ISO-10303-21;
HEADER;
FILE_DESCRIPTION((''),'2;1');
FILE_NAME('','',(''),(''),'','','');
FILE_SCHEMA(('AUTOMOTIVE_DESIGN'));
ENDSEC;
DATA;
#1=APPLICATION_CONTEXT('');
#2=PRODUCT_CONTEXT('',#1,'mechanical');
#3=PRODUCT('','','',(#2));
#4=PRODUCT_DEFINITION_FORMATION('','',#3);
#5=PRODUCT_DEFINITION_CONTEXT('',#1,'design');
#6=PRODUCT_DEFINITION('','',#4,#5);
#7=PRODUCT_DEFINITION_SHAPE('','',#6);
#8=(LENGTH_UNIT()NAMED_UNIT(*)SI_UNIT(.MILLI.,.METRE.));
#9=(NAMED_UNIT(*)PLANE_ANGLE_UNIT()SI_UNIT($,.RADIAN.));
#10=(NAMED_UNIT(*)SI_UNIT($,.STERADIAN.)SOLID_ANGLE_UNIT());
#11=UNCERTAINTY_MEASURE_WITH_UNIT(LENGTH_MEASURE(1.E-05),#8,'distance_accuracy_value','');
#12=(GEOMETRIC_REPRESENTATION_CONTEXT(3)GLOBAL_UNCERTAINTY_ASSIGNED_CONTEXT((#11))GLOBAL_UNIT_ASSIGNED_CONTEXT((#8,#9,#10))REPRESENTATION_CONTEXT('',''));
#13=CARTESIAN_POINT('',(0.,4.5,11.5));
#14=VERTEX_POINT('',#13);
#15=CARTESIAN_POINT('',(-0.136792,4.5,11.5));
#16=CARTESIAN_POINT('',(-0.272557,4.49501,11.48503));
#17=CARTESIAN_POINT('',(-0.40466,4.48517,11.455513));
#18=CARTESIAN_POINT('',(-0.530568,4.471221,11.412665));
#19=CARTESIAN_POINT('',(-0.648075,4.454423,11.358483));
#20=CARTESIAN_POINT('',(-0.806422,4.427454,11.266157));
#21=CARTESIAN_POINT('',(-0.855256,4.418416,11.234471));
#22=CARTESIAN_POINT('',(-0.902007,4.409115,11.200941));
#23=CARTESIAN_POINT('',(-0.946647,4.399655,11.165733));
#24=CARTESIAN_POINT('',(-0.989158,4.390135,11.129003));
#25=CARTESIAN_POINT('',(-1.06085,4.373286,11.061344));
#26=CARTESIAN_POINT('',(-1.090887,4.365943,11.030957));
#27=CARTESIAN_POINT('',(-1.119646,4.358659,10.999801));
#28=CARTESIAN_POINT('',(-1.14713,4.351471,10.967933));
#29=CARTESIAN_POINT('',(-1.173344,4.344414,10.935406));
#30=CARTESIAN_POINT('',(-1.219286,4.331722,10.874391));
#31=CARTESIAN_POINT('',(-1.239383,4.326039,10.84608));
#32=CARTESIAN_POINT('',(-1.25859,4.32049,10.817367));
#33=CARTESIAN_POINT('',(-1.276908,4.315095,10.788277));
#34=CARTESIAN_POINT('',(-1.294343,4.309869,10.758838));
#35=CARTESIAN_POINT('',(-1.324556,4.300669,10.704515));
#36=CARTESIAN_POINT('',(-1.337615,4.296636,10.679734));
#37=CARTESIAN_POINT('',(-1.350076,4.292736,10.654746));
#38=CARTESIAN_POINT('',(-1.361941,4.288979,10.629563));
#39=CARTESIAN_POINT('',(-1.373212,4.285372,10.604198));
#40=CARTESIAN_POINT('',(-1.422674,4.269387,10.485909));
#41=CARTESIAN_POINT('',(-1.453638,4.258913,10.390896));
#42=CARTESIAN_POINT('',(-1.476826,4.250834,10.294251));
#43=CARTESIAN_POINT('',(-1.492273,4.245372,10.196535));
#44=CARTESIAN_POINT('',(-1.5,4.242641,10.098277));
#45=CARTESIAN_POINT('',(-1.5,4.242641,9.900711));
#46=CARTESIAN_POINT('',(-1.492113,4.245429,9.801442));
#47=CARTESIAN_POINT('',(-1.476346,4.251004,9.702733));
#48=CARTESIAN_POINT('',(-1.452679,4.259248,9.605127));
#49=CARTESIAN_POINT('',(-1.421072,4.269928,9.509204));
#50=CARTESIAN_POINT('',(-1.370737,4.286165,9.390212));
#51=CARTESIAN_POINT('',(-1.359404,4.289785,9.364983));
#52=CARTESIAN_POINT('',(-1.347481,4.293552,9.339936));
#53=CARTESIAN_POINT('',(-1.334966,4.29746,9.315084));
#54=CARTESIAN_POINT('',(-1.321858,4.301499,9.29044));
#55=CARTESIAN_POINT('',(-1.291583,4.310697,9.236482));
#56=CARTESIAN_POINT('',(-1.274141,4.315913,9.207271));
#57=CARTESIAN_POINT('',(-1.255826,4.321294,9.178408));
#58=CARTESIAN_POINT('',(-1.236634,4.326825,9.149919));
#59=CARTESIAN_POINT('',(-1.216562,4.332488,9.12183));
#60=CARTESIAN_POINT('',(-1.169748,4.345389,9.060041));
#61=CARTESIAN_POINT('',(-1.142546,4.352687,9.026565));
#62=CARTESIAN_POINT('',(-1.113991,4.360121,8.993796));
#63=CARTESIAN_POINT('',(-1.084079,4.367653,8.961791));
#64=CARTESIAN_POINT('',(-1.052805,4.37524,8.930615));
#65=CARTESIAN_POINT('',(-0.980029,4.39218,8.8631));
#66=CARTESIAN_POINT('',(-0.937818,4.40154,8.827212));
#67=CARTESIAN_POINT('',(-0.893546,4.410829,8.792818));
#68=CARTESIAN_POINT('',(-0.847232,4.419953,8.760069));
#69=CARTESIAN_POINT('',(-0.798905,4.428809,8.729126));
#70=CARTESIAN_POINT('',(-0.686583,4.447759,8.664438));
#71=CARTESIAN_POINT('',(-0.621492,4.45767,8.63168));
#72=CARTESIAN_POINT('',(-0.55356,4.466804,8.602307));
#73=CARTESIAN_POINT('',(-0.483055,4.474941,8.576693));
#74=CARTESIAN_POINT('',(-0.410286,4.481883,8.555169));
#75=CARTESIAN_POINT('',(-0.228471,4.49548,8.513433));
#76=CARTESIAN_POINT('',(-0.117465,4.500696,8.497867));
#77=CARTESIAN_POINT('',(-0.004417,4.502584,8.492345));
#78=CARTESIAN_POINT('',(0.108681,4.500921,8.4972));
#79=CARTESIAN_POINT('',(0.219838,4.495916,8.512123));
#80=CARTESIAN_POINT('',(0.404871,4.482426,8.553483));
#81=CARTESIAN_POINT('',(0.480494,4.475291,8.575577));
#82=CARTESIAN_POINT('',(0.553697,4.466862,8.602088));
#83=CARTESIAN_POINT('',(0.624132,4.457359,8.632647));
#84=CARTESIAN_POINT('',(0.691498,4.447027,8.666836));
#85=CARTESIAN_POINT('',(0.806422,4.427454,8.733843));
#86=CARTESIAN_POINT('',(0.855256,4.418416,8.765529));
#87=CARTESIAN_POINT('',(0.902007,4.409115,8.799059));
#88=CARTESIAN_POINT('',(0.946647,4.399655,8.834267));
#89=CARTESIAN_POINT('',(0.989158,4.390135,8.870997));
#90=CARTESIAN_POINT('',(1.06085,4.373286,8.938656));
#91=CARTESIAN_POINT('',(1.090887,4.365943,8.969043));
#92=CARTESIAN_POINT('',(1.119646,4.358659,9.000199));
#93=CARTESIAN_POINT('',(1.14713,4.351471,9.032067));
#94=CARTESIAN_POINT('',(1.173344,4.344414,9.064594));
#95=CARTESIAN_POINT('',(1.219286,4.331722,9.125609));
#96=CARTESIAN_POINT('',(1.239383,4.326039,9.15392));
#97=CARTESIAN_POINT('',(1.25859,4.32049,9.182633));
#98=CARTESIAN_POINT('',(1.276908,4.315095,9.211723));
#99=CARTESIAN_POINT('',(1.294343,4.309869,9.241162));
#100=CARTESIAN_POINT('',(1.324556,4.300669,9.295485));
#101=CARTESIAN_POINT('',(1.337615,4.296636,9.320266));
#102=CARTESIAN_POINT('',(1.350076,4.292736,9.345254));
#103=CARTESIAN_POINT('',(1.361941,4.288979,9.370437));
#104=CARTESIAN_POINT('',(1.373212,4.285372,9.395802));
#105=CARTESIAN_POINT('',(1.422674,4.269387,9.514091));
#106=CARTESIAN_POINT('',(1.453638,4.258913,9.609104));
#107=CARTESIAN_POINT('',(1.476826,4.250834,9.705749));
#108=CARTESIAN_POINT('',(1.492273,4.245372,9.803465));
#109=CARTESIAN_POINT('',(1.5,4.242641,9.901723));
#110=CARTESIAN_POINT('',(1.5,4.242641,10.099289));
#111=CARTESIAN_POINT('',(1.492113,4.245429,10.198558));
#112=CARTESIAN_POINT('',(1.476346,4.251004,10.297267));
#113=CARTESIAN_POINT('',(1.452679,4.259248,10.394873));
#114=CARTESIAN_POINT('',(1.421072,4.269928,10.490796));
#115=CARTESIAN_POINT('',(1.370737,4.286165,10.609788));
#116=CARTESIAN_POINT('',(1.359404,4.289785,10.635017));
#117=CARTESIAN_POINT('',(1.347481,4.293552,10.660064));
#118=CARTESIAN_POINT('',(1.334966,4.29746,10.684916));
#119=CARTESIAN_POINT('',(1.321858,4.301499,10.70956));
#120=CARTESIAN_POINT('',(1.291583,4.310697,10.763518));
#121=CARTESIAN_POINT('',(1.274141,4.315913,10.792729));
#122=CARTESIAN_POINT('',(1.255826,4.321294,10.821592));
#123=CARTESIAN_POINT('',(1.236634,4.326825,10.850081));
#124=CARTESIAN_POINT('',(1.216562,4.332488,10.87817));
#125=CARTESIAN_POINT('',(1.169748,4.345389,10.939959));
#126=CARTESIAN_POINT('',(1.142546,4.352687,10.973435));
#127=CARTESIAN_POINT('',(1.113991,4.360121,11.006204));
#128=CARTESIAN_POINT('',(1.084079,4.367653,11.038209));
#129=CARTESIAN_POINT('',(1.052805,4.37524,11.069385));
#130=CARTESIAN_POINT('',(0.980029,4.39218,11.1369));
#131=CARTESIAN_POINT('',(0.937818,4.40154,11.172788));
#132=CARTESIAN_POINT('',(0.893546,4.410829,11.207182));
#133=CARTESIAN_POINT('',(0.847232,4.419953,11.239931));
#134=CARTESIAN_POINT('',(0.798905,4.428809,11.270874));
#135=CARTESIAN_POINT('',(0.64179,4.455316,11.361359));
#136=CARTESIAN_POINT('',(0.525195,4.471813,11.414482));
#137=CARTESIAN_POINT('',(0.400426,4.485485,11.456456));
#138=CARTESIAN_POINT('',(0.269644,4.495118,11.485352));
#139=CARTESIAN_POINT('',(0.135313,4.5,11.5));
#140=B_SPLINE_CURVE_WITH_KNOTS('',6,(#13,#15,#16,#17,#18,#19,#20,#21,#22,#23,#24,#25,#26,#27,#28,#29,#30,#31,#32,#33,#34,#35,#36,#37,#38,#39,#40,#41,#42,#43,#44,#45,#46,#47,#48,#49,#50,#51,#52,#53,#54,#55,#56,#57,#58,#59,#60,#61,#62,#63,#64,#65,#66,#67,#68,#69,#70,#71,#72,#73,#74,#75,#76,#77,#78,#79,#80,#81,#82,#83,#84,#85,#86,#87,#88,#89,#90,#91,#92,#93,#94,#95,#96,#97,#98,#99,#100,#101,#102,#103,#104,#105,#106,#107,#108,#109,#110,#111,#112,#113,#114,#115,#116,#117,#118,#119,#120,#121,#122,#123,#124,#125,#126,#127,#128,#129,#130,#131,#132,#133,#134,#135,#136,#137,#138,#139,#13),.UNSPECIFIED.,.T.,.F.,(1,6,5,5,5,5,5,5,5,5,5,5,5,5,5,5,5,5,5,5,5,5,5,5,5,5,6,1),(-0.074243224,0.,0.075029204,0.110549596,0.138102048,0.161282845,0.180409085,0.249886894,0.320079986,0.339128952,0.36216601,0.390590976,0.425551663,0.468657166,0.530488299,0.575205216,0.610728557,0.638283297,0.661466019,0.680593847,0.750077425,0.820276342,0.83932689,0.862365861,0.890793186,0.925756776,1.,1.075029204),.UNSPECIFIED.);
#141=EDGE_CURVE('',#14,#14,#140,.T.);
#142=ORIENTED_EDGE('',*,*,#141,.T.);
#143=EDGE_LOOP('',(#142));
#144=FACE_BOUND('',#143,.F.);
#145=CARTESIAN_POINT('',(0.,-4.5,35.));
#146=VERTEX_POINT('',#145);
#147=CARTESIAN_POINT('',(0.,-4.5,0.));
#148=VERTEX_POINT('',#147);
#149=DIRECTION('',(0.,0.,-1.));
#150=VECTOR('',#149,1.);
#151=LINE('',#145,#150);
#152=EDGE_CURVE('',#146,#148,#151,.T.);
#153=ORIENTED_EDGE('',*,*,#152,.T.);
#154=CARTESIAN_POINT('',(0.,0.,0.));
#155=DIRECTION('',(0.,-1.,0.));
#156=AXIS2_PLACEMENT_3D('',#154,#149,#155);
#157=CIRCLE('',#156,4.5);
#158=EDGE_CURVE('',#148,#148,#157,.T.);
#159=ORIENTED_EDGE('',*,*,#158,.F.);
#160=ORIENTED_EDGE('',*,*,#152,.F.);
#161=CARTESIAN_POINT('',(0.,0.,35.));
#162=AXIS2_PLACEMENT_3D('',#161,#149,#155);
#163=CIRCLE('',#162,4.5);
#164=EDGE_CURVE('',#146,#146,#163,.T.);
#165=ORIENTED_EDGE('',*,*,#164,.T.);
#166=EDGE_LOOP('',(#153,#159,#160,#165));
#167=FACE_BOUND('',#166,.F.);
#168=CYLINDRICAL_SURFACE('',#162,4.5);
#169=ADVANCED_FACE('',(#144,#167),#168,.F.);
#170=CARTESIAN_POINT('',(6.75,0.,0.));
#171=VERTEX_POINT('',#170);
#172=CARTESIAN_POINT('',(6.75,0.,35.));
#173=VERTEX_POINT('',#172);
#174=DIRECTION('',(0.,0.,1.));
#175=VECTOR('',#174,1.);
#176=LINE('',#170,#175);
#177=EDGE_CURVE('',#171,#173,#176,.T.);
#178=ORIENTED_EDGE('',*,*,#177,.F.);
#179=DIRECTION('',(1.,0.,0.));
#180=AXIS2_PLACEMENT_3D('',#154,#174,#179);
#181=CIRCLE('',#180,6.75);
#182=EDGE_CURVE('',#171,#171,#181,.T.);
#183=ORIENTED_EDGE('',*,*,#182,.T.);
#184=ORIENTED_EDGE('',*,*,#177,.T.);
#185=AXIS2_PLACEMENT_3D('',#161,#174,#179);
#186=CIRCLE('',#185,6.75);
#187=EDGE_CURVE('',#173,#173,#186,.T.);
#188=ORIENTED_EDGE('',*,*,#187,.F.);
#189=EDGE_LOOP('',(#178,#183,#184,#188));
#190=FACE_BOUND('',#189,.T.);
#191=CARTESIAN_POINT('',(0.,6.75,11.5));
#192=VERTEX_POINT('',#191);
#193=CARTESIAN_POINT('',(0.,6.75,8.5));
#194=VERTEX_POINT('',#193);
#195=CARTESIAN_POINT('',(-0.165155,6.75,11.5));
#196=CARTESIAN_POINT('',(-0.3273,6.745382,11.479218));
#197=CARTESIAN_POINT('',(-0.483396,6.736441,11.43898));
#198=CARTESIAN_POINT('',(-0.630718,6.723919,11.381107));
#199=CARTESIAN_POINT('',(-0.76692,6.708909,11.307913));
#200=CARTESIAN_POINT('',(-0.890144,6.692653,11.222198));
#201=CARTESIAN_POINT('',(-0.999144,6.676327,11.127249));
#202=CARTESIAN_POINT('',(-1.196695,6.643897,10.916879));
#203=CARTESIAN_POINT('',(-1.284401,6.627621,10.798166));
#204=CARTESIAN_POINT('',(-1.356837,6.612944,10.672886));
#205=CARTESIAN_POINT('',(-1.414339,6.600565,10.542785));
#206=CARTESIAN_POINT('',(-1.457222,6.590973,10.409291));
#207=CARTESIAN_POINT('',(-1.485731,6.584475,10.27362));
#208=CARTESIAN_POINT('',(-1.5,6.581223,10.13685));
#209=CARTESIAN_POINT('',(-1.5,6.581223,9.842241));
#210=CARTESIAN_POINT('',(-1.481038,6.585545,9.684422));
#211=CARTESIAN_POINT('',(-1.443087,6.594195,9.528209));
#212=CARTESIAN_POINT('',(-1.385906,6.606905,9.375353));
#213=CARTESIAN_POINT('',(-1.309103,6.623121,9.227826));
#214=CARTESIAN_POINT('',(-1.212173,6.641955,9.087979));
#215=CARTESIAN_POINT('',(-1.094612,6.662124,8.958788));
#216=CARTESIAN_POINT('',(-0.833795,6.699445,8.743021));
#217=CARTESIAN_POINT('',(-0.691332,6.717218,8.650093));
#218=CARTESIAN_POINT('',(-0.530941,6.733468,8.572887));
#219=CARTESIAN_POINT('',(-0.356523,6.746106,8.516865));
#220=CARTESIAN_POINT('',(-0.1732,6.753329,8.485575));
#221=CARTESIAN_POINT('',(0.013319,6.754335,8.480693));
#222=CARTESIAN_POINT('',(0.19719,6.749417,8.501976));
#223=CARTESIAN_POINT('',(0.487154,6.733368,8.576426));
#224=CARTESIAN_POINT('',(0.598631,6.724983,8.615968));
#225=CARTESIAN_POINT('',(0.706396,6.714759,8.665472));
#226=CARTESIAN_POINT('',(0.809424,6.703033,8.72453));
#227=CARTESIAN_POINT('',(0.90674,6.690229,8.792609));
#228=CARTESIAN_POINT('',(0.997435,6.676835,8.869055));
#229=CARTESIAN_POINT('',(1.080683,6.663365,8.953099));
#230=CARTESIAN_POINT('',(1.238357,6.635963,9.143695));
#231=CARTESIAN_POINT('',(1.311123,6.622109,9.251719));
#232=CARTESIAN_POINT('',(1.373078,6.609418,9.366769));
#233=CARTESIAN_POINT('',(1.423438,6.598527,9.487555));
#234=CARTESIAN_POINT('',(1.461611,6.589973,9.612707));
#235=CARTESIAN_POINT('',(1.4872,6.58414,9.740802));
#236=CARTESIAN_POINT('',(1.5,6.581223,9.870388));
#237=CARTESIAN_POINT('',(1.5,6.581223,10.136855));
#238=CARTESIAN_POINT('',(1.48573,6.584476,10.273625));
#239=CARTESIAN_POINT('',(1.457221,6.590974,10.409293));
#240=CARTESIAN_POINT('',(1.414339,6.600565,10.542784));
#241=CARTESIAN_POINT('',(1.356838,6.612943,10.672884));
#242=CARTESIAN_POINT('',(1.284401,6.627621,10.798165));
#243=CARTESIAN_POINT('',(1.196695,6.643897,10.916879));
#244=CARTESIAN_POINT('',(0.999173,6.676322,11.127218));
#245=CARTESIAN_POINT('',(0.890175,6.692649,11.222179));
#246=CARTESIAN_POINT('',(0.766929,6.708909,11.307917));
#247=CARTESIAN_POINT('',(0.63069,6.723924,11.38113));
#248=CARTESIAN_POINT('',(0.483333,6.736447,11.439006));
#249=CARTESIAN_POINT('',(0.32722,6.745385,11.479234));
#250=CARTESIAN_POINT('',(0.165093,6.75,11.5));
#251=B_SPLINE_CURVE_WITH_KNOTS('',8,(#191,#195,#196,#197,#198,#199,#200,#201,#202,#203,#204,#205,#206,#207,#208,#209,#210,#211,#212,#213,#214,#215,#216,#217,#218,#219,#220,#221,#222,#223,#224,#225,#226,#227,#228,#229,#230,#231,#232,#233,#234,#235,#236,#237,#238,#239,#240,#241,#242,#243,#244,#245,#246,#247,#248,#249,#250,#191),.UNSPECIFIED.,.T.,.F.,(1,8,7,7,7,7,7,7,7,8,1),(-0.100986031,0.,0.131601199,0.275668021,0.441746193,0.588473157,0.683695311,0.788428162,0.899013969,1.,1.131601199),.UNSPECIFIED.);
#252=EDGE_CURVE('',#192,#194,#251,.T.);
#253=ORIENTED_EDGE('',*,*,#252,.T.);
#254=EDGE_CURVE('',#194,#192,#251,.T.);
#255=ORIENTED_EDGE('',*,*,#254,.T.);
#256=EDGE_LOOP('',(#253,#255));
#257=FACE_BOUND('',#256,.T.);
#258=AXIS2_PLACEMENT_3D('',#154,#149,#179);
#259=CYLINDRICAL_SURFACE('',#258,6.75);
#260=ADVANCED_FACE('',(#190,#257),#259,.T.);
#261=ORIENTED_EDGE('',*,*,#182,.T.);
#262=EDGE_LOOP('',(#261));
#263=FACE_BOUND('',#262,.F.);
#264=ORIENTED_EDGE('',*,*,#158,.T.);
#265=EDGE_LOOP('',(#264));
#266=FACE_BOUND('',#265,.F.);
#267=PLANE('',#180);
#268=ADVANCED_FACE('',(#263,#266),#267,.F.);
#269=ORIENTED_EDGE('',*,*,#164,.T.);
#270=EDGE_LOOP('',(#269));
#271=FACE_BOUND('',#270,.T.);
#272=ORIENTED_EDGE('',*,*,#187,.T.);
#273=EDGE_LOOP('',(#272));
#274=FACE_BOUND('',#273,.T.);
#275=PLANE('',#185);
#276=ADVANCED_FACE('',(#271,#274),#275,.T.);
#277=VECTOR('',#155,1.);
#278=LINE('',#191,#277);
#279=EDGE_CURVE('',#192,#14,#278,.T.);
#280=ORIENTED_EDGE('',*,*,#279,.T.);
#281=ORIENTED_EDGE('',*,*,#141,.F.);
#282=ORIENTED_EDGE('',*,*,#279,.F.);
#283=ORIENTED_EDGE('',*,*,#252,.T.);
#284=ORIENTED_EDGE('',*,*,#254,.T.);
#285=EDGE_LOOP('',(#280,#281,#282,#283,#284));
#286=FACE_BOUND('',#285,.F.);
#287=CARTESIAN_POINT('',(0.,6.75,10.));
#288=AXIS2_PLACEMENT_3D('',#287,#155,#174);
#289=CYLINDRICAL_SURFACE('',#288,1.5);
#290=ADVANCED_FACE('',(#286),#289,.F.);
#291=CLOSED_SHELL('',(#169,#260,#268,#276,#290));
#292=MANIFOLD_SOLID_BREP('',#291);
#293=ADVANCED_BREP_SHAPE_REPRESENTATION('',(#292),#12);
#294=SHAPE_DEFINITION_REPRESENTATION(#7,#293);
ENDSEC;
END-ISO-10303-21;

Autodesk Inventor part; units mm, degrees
ref_plane "YZ Plane" through (0, 0, 0) normal (1, 0, 0) x (0, 1, 0)
ref_plane "XY Plane" through (0, 0, 0) normal (0, 0, 1) x (1, 0, 0)
sketch "Sketch1" plane through (0, 0, 0) normal (0, 0, 1) x (1, 0, 0)
  circle A0 centre (0, 0) radius 6.75
  dimension "d0" = 13.5
extrude "Extrusion1" add sketch "Sketch1" along normal blind 35
sketch "Sketch2" plane through (0, 0, 35) normal (0, 0, 1) x (1, 0, 0)
  point P0 (0, 0)
hole "Hole1" at (0, 0, 35) direction (0, 0, -1) diameter 9 end through all
ref_plane "Work Plane1" through (0, 6.75, 0) normal (0, 1, 0) x (-1, 0, 0)
sketch "Sketch3" plane through (0, 6.75, 0) normal (0, 1, 0) x (-1, 0, 0)
  line L0 (6.75, 0) -> (-6.75, 0) projected
  point P0 (0, 0)
  point P1 (0, 10)
  dimension "d10" = 10
  dimension "d11" = 6.75
hole "Hole2" at (0, 6.75, 10) direction (0, -1, 0) diameter 3 end up to surface
properties part number "HUDSON-1-74"
